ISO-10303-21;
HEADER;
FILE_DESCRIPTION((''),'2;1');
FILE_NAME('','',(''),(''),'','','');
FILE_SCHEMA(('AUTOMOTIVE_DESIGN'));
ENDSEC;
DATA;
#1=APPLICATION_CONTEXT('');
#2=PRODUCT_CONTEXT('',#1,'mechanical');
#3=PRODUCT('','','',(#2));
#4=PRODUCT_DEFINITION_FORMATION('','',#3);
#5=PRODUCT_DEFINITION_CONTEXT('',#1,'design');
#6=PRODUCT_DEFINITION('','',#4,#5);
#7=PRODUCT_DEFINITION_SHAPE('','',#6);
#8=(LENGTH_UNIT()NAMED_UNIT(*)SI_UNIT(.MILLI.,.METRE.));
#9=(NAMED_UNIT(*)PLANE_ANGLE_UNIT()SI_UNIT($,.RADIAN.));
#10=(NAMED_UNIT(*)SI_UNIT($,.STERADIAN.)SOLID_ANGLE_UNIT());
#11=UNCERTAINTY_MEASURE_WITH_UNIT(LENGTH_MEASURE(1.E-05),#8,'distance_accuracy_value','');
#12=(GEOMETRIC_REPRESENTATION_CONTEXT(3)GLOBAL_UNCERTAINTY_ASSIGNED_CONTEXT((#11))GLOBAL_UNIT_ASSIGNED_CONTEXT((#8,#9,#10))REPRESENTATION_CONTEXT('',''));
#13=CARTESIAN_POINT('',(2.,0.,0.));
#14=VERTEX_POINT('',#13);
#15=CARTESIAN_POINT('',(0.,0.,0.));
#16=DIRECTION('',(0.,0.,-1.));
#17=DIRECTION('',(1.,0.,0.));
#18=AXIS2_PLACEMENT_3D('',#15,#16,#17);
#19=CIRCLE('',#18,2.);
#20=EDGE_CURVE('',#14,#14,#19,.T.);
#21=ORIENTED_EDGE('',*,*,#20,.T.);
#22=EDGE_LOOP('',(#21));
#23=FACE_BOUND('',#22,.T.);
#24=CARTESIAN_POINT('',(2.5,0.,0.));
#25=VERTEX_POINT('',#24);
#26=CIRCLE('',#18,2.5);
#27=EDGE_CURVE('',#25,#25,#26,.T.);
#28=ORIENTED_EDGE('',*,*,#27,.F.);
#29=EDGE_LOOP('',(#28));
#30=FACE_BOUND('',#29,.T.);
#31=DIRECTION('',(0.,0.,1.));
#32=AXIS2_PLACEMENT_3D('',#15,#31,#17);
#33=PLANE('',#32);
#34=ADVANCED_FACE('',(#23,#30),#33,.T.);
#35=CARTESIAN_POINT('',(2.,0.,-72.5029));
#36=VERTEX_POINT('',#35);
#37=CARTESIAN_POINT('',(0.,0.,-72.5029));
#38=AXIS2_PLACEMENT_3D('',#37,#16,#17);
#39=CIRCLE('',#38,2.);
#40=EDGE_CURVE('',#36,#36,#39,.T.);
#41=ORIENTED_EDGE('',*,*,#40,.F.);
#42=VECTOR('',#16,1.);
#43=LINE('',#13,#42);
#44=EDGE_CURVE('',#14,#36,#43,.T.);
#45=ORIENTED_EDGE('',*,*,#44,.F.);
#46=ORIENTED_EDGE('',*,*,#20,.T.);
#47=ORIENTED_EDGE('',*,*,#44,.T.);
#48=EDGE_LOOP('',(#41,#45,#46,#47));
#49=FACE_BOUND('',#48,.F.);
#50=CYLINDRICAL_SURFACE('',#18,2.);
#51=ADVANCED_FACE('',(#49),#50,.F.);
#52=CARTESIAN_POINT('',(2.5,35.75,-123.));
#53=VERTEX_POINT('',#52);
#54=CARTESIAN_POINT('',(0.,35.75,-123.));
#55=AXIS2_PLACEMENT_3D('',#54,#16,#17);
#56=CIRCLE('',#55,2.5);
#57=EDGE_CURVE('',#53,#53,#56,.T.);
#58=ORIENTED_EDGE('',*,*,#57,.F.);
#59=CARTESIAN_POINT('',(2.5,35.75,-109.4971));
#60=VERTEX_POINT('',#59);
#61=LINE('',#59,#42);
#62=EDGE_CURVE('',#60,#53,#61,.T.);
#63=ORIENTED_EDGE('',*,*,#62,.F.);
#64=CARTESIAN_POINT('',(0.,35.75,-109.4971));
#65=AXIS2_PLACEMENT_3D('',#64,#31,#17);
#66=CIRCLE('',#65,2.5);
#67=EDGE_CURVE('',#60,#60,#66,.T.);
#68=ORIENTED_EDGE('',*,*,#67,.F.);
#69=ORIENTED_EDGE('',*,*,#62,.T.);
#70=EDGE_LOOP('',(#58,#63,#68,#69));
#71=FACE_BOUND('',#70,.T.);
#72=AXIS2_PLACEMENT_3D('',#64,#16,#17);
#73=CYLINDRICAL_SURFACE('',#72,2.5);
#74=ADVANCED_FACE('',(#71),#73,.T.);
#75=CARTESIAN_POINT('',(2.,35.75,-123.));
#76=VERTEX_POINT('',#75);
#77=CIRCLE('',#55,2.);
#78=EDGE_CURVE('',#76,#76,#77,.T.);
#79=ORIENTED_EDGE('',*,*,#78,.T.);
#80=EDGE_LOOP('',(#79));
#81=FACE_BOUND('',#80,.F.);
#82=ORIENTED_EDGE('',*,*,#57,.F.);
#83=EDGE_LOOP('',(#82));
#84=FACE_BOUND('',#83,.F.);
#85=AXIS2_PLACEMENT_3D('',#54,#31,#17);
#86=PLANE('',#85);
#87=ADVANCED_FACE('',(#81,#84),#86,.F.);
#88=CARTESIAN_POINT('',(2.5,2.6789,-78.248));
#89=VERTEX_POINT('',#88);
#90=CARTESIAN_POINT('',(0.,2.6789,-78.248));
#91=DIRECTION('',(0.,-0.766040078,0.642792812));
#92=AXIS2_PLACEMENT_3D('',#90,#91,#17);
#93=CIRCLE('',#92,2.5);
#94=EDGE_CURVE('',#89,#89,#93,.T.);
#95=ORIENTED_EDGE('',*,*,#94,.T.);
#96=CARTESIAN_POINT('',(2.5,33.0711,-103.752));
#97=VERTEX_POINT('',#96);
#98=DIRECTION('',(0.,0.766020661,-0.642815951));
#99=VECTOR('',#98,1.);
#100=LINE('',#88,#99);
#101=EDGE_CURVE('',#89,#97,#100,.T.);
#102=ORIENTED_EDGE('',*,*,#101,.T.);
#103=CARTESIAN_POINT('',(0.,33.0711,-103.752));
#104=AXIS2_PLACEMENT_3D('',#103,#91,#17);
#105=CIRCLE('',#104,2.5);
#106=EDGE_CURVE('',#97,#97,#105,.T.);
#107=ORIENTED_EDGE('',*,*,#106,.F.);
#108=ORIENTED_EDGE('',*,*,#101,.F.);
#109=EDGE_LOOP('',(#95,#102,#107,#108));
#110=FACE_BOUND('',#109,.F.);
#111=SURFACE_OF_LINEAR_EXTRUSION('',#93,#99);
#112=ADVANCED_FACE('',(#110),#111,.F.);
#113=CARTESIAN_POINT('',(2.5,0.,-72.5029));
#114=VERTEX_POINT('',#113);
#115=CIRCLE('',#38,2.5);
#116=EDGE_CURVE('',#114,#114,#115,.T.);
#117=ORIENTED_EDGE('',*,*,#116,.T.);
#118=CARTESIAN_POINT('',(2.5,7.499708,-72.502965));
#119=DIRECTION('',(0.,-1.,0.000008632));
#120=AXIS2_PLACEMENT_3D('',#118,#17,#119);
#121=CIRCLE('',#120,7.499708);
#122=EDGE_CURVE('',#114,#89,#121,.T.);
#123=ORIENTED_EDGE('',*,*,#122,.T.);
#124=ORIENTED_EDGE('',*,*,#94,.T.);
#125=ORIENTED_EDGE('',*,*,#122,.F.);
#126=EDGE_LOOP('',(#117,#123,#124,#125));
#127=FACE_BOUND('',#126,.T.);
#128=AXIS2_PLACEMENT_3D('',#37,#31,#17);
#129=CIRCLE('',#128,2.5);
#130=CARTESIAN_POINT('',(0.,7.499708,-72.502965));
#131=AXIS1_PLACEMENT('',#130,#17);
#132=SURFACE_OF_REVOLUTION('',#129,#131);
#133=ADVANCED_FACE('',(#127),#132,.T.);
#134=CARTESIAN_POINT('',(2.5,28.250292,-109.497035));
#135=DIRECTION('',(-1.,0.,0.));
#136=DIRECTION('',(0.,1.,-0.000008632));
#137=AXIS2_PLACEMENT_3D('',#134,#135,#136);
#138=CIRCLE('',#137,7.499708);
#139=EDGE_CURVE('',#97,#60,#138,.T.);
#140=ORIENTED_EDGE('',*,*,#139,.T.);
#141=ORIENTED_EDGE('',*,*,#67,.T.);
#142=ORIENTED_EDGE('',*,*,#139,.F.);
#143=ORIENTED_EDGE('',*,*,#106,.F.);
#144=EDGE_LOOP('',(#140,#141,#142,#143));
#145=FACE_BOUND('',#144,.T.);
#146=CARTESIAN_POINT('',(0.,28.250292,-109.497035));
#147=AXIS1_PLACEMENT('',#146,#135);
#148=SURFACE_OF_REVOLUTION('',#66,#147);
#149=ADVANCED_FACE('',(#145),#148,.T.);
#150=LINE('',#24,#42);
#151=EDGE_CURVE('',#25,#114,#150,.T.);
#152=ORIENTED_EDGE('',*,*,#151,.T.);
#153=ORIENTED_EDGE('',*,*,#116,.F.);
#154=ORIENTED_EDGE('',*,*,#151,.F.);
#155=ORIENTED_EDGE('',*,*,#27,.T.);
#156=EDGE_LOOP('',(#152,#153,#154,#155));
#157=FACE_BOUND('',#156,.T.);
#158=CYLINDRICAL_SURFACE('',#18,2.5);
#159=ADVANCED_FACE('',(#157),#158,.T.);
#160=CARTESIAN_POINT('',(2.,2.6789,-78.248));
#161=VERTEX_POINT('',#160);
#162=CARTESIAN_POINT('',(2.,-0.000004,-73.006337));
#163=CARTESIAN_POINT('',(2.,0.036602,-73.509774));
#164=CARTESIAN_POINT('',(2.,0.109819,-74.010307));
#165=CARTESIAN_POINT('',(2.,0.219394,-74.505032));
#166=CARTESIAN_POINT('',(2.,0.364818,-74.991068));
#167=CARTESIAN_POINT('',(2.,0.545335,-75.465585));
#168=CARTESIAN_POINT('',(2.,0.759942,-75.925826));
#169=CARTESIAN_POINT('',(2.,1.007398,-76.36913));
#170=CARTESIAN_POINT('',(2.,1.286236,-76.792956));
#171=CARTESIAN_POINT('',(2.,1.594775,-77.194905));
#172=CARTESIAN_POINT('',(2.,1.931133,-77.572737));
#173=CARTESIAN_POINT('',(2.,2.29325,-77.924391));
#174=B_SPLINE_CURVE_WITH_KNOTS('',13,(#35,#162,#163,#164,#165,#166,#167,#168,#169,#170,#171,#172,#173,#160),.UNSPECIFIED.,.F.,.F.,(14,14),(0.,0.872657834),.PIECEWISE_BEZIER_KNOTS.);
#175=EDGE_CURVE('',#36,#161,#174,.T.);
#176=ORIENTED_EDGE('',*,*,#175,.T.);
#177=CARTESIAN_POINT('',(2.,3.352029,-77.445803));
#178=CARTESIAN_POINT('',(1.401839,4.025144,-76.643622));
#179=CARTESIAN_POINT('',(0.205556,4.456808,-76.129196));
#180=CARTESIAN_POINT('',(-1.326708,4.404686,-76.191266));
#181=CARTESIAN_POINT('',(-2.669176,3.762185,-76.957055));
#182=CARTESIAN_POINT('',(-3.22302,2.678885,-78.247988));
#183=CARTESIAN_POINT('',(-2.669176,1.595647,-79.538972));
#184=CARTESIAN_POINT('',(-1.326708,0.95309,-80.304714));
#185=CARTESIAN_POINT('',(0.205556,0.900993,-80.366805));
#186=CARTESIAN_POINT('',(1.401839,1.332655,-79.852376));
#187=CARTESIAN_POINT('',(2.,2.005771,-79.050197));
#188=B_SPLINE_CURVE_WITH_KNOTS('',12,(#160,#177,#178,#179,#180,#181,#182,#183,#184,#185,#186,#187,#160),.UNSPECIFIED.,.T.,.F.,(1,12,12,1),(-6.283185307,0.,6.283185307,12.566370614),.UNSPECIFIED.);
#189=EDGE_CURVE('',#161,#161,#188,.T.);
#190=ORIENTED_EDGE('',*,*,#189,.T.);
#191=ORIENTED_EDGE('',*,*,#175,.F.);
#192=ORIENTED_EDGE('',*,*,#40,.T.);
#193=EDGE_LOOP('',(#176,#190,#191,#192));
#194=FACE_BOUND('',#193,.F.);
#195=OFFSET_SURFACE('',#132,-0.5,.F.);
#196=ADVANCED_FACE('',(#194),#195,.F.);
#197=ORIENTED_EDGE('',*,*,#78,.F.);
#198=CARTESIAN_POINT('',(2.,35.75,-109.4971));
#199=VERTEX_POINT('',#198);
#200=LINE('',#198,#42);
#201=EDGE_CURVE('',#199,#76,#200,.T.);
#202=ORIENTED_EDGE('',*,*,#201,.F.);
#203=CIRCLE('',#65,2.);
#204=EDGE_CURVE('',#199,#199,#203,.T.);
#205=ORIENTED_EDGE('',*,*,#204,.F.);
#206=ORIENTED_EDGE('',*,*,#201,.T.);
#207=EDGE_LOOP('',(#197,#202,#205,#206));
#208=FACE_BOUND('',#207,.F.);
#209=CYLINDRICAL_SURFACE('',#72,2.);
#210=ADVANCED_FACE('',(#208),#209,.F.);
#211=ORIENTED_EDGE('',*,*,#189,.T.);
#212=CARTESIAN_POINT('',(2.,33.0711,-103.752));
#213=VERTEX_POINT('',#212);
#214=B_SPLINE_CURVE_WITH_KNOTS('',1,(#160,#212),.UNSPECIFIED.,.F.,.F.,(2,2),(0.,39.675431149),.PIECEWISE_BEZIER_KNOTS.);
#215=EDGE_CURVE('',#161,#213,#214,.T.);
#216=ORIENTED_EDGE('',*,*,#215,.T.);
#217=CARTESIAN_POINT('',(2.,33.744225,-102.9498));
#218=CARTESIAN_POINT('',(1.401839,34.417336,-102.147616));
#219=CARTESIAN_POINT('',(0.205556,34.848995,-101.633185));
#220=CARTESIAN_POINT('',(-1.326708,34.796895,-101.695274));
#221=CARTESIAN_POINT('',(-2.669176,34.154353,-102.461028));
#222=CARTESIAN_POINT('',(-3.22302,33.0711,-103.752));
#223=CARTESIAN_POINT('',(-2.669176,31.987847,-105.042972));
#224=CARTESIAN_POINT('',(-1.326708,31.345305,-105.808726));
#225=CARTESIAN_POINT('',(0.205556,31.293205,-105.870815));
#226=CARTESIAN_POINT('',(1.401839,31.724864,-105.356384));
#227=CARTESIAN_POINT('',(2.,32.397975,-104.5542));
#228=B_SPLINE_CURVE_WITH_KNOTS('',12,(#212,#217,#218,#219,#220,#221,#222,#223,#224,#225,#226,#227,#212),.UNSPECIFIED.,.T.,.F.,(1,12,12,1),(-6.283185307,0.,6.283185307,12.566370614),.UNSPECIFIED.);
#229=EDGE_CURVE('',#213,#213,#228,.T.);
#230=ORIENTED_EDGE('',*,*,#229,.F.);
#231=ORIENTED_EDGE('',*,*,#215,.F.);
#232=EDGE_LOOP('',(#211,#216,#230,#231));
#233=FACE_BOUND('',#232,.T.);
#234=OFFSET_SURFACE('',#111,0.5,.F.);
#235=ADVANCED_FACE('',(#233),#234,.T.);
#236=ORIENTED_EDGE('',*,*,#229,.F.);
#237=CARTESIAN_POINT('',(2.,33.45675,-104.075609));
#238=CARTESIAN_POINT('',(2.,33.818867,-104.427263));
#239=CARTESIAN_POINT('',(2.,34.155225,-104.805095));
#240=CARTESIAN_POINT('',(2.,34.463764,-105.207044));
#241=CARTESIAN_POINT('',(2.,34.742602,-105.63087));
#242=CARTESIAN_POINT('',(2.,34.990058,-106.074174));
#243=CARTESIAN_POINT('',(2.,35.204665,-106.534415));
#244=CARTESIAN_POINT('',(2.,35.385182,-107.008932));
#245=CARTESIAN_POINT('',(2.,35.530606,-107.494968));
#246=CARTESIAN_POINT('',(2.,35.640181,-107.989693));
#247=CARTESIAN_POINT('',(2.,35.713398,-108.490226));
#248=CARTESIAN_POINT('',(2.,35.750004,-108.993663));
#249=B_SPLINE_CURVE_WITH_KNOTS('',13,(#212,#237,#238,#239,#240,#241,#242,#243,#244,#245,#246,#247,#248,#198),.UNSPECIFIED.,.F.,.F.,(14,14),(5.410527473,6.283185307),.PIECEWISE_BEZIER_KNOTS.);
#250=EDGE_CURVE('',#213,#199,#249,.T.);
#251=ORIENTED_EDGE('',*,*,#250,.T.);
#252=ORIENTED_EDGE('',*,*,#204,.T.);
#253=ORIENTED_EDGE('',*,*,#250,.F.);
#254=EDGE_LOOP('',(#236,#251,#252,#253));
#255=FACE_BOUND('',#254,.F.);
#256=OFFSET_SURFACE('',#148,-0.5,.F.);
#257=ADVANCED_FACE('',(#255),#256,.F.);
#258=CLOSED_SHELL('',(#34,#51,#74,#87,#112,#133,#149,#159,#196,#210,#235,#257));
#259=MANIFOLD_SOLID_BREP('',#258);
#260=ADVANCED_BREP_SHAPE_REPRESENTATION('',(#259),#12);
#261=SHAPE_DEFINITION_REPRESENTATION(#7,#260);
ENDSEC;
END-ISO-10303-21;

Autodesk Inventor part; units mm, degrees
ref_plane "YZ Plane" through (0, 0, 0) normal (1, 0, 0) x (0, 1, 0)
ref_plane "XZ Plane" through (0, 0, 0) normal (0, 1, 0) x (-1, 0, 0)
ref_plane "XY Plane" through (0, 0, 0) normal (0, 0, 1) x (1, 0, 0)
sketch "Sketch1" plane through (0, 0, 0) normal (0, 0, 1) x (1, 0, 0)
  circle A0 centre (0, 0) radius 2.5
  dimension "d0" = 5
sketch "Sketch2" plane through (0, 0, 0) normal (1, 0, 0) x (0, 1, 0)
  line L0 (0, 0) -> (0, -72.5029)
  line L1 (2.6789, -78.248) -> (33.0711, -103.752)
  line L2 (35.75, -109.4971) -> (35.75, -123)
  arc A0 (0, -72.5029) -> (2.6789, -78.248) centre (7.5, -72.5029) ccw
  arc A1 (35.75, -109.4971) -> (33.0711, -103.752) centre (28.25, -109.4971) ccw
  point P0 (0, -76)
  point P1 (35.75, -106)
  dimension "d1" = 76
  dimension "d2" = 35.75
  dimension "d3" = 17
  dimension "d4" = 30
  dimension "d5" = 7.5
sweep "Sweep1" add profiles "Sketch1" path "Sketch2"
shell "Shell1" thickness 0.5 removed faces 2 at (-0.852, 0.5526, 0) at (0.4229, 36.3026, -123)
properties part number "158 diameter 76" material "Iron, Gray"
